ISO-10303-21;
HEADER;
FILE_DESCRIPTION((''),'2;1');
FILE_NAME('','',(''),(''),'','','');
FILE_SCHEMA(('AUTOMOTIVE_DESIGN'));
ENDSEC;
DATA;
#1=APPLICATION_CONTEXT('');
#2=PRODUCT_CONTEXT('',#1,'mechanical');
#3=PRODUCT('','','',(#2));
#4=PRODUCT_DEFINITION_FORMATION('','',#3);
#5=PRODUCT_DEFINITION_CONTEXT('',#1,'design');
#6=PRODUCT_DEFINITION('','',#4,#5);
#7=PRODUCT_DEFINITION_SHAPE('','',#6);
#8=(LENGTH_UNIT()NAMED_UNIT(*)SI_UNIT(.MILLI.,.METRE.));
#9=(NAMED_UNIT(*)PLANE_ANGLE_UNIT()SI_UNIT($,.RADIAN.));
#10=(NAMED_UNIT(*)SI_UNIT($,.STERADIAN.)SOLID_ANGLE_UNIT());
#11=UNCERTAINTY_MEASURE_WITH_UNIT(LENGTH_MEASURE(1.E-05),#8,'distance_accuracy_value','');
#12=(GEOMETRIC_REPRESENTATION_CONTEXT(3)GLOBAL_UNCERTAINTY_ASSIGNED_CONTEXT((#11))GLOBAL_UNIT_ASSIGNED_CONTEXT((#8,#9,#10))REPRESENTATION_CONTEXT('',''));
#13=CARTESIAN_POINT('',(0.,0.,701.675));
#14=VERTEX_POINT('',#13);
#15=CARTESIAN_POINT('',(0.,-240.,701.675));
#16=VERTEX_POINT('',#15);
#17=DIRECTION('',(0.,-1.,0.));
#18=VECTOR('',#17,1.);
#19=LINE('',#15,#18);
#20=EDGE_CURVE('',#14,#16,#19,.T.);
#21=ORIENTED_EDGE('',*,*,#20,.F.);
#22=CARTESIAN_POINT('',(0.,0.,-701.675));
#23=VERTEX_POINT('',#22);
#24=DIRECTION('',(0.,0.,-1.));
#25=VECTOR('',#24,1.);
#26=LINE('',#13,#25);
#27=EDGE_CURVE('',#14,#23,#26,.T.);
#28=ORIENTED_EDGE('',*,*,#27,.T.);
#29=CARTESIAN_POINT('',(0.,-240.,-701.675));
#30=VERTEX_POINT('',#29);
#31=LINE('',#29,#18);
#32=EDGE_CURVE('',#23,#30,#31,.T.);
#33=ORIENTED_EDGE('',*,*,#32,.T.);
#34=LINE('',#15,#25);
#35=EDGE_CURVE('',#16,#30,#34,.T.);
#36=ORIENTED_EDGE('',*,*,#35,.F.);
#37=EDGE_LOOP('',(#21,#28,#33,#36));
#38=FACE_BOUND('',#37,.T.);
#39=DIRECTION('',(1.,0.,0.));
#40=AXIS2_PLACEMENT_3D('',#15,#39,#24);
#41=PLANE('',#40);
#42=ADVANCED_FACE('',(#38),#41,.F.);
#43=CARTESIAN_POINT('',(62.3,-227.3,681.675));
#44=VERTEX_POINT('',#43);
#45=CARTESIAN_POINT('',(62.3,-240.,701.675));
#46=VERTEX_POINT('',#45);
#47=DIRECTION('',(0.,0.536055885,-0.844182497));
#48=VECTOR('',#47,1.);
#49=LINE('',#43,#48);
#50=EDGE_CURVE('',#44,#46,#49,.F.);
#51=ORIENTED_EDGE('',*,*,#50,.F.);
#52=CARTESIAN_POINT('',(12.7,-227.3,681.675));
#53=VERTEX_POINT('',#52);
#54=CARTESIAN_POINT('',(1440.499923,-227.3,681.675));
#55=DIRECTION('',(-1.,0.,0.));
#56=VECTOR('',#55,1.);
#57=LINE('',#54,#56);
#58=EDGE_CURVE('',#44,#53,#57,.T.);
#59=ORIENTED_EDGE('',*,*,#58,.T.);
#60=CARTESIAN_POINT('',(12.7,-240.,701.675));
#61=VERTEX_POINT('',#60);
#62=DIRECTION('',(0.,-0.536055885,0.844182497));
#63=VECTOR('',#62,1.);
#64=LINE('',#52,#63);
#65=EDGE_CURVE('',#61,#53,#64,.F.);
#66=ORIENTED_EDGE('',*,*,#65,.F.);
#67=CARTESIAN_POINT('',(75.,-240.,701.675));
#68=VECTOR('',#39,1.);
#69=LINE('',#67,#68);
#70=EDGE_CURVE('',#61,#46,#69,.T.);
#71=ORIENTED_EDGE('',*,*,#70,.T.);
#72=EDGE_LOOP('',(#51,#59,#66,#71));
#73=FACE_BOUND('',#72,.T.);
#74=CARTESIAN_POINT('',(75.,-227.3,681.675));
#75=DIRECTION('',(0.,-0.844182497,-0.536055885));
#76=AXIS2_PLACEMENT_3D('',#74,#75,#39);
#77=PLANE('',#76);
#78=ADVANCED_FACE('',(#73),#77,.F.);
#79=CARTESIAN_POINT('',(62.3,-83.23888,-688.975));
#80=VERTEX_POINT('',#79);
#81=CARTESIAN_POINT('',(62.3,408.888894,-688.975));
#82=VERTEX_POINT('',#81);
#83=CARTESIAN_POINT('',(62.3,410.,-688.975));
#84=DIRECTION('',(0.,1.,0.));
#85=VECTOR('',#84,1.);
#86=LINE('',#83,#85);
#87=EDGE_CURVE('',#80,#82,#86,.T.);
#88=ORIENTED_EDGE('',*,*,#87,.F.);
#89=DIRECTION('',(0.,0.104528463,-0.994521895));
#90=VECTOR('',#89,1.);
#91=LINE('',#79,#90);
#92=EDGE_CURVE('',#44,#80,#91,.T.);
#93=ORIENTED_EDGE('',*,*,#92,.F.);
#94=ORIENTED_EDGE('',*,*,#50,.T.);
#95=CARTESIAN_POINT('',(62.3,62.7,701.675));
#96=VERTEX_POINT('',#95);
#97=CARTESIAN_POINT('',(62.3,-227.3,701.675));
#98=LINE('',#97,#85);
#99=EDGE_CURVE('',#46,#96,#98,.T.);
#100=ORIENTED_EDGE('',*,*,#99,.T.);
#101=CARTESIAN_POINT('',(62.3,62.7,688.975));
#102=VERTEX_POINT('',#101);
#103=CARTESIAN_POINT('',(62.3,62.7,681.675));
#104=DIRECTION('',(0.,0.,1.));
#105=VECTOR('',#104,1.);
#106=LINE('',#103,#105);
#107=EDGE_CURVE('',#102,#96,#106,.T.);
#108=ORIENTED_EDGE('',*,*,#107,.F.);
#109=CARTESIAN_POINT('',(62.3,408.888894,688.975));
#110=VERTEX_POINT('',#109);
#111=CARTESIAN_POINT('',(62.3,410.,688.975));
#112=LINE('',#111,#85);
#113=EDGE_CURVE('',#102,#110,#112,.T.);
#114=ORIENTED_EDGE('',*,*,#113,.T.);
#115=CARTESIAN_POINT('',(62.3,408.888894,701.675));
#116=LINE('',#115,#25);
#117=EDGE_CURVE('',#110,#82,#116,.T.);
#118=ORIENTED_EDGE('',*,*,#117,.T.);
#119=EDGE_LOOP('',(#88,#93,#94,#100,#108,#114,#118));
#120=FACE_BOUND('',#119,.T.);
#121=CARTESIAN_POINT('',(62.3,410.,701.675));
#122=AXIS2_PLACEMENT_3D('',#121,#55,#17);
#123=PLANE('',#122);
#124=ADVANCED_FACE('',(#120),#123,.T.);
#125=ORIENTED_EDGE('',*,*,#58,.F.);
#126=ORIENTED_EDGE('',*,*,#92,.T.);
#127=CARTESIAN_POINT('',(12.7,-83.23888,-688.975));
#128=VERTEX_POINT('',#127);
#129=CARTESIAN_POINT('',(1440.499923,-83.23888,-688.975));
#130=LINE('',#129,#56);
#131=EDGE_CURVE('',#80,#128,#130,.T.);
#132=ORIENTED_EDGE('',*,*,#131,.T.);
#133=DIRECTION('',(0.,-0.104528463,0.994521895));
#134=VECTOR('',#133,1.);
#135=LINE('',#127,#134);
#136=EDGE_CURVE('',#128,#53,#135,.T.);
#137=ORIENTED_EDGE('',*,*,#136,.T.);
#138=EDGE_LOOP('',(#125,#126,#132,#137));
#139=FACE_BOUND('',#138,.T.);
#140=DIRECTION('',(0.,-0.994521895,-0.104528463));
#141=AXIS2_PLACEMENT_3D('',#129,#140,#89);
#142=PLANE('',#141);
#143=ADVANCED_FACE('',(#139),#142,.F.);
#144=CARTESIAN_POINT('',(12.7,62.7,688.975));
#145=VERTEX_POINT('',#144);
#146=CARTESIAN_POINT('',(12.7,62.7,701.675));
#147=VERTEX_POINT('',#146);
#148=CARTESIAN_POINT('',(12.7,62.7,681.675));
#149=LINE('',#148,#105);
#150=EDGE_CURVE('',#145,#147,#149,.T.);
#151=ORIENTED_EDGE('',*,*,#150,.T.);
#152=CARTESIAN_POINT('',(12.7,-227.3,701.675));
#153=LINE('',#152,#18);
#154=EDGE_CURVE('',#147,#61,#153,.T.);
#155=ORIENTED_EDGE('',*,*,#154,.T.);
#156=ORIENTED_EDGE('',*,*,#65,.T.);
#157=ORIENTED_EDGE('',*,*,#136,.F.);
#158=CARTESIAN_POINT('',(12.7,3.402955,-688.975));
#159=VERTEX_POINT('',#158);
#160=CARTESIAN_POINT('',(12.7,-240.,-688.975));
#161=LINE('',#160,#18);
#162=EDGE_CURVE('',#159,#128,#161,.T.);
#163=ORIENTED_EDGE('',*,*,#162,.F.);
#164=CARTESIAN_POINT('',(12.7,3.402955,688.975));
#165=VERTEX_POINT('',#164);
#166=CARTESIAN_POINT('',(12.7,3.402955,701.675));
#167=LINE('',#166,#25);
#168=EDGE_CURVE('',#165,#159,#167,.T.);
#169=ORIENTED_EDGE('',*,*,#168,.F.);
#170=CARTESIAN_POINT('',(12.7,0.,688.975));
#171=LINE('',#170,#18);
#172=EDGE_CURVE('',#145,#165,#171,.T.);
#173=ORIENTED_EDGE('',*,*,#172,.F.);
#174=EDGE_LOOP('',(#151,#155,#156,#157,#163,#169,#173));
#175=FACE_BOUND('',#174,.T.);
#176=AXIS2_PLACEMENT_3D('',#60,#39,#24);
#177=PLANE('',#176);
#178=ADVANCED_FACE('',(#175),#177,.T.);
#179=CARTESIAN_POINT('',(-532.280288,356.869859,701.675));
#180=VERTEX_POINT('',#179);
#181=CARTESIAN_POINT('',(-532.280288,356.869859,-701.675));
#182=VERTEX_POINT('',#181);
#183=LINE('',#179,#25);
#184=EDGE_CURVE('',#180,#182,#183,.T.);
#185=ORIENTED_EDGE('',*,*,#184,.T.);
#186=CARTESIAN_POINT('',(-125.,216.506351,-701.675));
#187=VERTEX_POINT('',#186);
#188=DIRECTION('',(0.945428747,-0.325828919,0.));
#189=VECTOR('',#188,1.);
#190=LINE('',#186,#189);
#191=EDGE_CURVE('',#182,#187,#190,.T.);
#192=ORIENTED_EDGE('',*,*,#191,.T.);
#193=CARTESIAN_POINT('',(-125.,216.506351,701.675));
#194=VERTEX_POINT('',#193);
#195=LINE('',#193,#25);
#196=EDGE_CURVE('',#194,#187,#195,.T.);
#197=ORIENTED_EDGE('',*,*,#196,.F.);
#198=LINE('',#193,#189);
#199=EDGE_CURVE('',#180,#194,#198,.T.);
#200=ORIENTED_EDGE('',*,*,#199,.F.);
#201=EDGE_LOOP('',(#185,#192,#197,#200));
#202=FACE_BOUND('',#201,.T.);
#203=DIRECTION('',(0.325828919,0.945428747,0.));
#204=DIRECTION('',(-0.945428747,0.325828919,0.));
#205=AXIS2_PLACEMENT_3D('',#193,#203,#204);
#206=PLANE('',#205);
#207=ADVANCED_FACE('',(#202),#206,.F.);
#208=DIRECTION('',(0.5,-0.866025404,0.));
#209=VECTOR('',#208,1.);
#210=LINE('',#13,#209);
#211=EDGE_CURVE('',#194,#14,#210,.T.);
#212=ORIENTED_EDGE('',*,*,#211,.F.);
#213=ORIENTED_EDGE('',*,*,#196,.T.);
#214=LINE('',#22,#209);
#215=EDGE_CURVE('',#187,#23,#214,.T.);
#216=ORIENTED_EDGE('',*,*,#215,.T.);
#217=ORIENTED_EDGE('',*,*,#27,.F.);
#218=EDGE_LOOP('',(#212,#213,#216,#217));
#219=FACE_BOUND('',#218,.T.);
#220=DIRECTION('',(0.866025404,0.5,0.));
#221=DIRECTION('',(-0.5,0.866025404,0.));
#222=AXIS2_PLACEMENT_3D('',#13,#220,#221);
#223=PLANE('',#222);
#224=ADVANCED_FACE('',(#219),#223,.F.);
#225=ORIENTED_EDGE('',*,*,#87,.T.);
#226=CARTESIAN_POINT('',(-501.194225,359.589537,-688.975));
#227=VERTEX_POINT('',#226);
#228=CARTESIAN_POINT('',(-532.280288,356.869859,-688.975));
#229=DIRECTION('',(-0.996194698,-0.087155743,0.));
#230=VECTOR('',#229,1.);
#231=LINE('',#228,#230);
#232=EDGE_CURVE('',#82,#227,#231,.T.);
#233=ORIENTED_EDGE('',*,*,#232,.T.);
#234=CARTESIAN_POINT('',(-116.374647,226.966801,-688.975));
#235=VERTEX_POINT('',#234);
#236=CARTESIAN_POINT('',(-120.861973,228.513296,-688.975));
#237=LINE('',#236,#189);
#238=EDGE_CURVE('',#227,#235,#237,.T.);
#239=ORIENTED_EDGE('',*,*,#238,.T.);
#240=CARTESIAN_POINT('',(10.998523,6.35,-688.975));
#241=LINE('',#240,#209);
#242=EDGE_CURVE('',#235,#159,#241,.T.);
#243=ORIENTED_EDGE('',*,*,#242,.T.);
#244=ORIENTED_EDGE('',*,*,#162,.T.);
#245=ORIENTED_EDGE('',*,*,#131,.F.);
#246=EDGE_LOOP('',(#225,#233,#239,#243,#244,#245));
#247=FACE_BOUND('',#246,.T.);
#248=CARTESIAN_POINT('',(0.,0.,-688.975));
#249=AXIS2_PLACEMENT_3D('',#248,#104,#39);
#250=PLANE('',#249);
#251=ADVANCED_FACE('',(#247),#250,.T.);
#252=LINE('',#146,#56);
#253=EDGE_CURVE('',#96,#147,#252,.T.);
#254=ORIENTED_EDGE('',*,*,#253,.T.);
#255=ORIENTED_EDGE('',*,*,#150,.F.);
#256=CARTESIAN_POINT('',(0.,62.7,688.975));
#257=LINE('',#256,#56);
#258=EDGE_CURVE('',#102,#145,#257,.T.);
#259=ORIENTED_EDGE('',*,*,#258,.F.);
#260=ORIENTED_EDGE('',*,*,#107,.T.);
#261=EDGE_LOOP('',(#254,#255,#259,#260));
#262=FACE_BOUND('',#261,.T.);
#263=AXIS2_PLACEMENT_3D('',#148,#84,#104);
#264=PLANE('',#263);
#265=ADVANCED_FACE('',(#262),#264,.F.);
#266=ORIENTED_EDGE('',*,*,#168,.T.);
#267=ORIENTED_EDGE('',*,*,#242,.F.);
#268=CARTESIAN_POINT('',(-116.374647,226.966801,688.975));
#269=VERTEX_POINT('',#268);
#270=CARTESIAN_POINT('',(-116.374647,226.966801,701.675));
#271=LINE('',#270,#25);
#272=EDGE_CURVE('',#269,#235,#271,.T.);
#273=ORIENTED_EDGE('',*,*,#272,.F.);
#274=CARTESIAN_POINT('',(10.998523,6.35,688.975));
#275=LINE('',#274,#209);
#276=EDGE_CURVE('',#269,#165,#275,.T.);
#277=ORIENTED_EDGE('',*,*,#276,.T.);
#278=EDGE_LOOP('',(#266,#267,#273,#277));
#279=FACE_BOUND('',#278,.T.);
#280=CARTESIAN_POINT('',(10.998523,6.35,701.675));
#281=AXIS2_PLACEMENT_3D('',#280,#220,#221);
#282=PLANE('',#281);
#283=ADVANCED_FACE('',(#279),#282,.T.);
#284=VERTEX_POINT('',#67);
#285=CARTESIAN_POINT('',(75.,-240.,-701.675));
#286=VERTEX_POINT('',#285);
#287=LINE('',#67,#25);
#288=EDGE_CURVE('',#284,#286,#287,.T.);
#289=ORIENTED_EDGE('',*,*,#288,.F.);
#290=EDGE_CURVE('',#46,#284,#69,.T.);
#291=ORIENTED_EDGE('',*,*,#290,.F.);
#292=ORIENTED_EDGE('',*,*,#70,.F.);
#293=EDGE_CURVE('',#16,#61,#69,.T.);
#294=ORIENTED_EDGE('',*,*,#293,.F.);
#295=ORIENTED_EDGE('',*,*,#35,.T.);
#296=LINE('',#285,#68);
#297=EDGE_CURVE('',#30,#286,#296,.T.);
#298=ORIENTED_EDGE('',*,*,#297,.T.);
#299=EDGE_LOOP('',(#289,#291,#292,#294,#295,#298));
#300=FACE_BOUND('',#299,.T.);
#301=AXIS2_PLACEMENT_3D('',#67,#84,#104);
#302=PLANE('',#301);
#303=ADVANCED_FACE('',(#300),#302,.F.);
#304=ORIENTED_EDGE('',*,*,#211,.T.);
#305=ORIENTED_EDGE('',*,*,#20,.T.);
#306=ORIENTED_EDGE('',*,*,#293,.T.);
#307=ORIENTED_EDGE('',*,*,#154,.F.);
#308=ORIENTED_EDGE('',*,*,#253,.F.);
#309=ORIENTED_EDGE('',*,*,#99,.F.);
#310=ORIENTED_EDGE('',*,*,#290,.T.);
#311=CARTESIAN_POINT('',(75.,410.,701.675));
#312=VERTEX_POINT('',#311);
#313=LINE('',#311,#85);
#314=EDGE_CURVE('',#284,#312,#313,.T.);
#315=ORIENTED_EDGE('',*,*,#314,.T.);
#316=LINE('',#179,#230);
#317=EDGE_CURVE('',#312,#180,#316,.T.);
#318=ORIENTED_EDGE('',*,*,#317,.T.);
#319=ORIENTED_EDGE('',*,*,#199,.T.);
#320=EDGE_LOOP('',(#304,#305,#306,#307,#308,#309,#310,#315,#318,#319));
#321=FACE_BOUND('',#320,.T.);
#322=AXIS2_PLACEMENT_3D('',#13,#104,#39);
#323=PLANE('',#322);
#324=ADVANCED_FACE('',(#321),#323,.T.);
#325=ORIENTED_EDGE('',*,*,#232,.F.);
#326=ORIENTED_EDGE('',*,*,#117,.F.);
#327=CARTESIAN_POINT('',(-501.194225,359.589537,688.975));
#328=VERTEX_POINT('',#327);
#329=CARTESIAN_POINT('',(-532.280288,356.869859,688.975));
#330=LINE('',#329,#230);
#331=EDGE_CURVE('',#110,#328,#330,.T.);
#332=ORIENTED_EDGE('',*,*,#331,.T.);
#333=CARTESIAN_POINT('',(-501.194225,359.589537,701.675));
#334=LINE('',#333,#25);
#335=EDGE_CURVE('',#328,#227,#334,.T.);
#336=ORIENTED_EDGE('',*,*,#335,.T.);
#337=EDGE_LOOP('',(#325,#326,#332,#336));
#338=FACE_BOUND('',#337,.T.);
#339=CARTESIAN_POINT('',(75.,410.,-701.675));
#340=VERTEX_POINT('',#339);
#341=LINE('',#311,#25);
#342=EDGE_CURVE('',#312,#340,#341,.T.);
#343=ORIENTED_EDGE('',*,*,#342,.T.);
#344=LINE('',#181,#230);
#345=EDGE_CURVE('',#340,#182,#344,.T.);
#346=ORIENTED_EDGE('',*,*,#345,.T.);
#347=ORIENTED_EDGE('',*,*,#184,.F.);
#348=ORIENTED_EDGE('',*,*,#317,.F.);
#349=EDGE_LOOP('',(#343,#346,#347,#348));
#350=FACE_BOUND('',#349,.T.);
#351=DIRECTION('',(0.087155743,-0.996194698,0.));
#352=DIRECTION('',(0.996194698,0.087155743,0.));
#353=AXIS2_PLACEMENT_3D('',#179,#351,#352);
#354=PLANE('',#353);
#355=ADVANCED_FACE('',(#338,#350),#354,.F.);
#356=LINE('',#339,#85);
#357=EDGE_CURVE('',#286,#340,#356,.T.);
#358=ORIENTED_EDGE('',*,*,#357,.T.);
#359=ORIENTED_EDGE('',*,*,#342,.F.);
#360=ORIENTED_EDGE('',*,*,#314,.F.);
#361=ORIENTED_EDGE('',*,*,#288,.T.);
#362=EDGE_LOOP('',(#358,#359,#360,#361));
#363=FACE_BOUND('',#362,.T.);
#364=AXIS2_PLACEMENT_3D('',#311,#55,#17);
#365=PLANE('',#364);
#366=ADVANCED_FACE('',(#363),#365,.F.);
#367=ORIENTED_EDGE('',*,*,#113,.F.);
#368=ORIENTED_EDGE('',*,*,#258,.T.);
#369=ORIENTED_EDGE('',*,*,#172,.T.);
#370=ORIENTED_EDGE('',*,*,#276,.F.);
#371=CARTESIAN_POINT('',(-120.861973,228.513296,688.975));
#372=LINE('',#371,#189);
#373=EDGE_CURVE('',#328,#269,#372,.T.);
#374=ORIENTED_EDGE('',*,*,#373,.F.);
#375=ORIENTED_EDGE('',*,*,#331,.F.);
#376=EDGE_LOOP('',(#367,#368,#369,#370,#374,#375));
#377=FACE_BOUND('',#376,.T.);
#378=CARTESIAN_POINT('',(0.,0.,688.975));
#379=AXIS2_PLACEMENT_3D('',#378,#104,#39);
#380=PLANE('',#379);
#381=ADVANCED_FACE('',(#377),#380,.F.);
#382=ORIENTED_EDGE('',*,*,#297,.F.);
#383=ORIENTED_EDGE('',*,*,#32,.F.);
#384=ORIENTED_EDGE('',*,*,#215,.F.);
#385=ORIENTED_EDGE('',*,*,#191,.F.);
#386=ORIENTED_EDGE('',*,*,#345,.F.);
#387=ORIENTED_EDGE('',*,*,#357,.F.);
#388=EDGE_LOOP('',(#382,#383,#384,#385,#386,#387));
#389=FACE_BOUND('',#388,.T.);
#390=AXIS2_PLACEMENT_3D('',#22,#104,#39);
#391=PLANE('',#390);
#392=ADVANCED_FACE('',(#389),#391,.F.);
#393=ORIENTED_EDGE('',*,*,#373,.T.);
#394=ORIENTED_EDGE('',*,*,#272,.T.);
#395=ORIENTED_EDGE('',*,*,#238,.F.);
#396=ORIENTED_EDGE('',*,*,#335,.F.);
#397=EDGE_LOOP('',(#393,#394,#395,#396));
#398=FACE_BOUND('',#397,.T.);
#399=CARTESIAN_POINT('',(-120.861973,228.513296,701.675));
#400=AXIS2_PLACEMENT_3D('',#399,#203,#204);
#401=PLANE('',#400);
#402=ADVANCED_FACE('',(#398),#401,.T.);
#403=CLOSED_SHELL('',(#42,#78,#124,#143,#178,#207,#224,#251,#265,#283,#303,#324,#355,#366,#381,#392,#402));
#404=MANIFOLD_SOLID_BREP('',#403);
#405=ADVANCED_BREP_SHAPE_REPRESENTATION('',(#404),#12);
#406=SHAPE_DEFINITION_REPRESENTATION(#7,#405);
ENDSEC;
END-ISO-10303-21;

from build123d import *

# Parameters (mm, degrees)
BOSS_EXTRUDE1_DEPTH = 701.675
SHELL1_T            = -12.7
SKETCH3_W           = 49.6
SKETCH3_H           = 290
CUT_EXTRUDE1_DEPTH  = 20
BOSS_EXTRUDE2_REACH = 980.494
CHAMFER1_SIZE       = 12.7
CHAMFER1_SIZE_2     = 20


with BuildPart() as part:
    # Sketch2 → Boss-Extrude1 (new, symmetric)
    with BuildSketch(Plane.XY):
        Polygon((0, 0), (-125, 216.506350946), (-532.280287957, 356.869859221), (75, 410), (75, -240), (0, -240), align=None)
    extrude(amount=BOSS_EXTRUDE1_DEPTH, both=True)

    # Shell1
    shell1_openings = [part.faces().sort_by_distance(p)[0] for p in [
        (-228.640143978, 383.434929611, 0),
    ]]
    offset(amount=SHELL1_T, openings=shell1_openings, kind=Kind.INTERSECTION)

    # Sketch3 → Cut-Extrude1 (cut)
    with BuildSketch(Plane.XY.offset(701.675)):
        with Locations((37.5, -82.3)):
            Rectangle(SKETCH3_W, SKETCH3_H)
    extrude(amount=-CUT_EXTRUDE1_DEPTH, mode=Mode.SUBTRACT)

    # Sketch4 → Boss-Extrude2 (add, up to next)
    with BuildSketch(Plane(origin=(12.7, 0, 0), x_dir=(0, 0, -1), z_dir=(1, 0, 0)), mode=Mode.PRIVATE) as boss_extrude2_sk1:
        Polygon((688.975, -227.3), (688.975, -83.238879933), (-681.675, -227.3), align=None)
    boss_extrude2_tool1 = extrude(boss_extrude2_sk1.sketch, amount=BOSS_EXTRUDE2_REACH, mode=Mode.PRIVATE) - part.part
    add(boss_extrude2_tool1.solids().sort_by_distance((12.7, -179.279627, -232.091667))[0])

    # Chamfer1
    # the kernel refuses this chamfer: 20, 12.7 mm, written as the material it adds along each edge
    # the kernel refuses this chamfer: 20, 12.7 mm, written as the material it takes off along each edge
    with BuildSketch(Plane(origin=(12.7, -227.3, 701.675), x_dir=(0, -0.9986795899881412, 0.05137194313161755), z_dir=(1, 0, 0))) as chamfer1_2_piece_1:
        Polygon((CHAMFER1_SIZE * 0.998679589988, CHAMFER1_SIZE * 0.0513719431316), (-CHAMFER1_SIZE_2 * 0.0513719431316, CHAMFER1_SIZE_2 * 0.998679589988), (0, 0), align=None)
    extrude(amount=49.6, mode=Mode.SUBTRACT)


solid = part.part
